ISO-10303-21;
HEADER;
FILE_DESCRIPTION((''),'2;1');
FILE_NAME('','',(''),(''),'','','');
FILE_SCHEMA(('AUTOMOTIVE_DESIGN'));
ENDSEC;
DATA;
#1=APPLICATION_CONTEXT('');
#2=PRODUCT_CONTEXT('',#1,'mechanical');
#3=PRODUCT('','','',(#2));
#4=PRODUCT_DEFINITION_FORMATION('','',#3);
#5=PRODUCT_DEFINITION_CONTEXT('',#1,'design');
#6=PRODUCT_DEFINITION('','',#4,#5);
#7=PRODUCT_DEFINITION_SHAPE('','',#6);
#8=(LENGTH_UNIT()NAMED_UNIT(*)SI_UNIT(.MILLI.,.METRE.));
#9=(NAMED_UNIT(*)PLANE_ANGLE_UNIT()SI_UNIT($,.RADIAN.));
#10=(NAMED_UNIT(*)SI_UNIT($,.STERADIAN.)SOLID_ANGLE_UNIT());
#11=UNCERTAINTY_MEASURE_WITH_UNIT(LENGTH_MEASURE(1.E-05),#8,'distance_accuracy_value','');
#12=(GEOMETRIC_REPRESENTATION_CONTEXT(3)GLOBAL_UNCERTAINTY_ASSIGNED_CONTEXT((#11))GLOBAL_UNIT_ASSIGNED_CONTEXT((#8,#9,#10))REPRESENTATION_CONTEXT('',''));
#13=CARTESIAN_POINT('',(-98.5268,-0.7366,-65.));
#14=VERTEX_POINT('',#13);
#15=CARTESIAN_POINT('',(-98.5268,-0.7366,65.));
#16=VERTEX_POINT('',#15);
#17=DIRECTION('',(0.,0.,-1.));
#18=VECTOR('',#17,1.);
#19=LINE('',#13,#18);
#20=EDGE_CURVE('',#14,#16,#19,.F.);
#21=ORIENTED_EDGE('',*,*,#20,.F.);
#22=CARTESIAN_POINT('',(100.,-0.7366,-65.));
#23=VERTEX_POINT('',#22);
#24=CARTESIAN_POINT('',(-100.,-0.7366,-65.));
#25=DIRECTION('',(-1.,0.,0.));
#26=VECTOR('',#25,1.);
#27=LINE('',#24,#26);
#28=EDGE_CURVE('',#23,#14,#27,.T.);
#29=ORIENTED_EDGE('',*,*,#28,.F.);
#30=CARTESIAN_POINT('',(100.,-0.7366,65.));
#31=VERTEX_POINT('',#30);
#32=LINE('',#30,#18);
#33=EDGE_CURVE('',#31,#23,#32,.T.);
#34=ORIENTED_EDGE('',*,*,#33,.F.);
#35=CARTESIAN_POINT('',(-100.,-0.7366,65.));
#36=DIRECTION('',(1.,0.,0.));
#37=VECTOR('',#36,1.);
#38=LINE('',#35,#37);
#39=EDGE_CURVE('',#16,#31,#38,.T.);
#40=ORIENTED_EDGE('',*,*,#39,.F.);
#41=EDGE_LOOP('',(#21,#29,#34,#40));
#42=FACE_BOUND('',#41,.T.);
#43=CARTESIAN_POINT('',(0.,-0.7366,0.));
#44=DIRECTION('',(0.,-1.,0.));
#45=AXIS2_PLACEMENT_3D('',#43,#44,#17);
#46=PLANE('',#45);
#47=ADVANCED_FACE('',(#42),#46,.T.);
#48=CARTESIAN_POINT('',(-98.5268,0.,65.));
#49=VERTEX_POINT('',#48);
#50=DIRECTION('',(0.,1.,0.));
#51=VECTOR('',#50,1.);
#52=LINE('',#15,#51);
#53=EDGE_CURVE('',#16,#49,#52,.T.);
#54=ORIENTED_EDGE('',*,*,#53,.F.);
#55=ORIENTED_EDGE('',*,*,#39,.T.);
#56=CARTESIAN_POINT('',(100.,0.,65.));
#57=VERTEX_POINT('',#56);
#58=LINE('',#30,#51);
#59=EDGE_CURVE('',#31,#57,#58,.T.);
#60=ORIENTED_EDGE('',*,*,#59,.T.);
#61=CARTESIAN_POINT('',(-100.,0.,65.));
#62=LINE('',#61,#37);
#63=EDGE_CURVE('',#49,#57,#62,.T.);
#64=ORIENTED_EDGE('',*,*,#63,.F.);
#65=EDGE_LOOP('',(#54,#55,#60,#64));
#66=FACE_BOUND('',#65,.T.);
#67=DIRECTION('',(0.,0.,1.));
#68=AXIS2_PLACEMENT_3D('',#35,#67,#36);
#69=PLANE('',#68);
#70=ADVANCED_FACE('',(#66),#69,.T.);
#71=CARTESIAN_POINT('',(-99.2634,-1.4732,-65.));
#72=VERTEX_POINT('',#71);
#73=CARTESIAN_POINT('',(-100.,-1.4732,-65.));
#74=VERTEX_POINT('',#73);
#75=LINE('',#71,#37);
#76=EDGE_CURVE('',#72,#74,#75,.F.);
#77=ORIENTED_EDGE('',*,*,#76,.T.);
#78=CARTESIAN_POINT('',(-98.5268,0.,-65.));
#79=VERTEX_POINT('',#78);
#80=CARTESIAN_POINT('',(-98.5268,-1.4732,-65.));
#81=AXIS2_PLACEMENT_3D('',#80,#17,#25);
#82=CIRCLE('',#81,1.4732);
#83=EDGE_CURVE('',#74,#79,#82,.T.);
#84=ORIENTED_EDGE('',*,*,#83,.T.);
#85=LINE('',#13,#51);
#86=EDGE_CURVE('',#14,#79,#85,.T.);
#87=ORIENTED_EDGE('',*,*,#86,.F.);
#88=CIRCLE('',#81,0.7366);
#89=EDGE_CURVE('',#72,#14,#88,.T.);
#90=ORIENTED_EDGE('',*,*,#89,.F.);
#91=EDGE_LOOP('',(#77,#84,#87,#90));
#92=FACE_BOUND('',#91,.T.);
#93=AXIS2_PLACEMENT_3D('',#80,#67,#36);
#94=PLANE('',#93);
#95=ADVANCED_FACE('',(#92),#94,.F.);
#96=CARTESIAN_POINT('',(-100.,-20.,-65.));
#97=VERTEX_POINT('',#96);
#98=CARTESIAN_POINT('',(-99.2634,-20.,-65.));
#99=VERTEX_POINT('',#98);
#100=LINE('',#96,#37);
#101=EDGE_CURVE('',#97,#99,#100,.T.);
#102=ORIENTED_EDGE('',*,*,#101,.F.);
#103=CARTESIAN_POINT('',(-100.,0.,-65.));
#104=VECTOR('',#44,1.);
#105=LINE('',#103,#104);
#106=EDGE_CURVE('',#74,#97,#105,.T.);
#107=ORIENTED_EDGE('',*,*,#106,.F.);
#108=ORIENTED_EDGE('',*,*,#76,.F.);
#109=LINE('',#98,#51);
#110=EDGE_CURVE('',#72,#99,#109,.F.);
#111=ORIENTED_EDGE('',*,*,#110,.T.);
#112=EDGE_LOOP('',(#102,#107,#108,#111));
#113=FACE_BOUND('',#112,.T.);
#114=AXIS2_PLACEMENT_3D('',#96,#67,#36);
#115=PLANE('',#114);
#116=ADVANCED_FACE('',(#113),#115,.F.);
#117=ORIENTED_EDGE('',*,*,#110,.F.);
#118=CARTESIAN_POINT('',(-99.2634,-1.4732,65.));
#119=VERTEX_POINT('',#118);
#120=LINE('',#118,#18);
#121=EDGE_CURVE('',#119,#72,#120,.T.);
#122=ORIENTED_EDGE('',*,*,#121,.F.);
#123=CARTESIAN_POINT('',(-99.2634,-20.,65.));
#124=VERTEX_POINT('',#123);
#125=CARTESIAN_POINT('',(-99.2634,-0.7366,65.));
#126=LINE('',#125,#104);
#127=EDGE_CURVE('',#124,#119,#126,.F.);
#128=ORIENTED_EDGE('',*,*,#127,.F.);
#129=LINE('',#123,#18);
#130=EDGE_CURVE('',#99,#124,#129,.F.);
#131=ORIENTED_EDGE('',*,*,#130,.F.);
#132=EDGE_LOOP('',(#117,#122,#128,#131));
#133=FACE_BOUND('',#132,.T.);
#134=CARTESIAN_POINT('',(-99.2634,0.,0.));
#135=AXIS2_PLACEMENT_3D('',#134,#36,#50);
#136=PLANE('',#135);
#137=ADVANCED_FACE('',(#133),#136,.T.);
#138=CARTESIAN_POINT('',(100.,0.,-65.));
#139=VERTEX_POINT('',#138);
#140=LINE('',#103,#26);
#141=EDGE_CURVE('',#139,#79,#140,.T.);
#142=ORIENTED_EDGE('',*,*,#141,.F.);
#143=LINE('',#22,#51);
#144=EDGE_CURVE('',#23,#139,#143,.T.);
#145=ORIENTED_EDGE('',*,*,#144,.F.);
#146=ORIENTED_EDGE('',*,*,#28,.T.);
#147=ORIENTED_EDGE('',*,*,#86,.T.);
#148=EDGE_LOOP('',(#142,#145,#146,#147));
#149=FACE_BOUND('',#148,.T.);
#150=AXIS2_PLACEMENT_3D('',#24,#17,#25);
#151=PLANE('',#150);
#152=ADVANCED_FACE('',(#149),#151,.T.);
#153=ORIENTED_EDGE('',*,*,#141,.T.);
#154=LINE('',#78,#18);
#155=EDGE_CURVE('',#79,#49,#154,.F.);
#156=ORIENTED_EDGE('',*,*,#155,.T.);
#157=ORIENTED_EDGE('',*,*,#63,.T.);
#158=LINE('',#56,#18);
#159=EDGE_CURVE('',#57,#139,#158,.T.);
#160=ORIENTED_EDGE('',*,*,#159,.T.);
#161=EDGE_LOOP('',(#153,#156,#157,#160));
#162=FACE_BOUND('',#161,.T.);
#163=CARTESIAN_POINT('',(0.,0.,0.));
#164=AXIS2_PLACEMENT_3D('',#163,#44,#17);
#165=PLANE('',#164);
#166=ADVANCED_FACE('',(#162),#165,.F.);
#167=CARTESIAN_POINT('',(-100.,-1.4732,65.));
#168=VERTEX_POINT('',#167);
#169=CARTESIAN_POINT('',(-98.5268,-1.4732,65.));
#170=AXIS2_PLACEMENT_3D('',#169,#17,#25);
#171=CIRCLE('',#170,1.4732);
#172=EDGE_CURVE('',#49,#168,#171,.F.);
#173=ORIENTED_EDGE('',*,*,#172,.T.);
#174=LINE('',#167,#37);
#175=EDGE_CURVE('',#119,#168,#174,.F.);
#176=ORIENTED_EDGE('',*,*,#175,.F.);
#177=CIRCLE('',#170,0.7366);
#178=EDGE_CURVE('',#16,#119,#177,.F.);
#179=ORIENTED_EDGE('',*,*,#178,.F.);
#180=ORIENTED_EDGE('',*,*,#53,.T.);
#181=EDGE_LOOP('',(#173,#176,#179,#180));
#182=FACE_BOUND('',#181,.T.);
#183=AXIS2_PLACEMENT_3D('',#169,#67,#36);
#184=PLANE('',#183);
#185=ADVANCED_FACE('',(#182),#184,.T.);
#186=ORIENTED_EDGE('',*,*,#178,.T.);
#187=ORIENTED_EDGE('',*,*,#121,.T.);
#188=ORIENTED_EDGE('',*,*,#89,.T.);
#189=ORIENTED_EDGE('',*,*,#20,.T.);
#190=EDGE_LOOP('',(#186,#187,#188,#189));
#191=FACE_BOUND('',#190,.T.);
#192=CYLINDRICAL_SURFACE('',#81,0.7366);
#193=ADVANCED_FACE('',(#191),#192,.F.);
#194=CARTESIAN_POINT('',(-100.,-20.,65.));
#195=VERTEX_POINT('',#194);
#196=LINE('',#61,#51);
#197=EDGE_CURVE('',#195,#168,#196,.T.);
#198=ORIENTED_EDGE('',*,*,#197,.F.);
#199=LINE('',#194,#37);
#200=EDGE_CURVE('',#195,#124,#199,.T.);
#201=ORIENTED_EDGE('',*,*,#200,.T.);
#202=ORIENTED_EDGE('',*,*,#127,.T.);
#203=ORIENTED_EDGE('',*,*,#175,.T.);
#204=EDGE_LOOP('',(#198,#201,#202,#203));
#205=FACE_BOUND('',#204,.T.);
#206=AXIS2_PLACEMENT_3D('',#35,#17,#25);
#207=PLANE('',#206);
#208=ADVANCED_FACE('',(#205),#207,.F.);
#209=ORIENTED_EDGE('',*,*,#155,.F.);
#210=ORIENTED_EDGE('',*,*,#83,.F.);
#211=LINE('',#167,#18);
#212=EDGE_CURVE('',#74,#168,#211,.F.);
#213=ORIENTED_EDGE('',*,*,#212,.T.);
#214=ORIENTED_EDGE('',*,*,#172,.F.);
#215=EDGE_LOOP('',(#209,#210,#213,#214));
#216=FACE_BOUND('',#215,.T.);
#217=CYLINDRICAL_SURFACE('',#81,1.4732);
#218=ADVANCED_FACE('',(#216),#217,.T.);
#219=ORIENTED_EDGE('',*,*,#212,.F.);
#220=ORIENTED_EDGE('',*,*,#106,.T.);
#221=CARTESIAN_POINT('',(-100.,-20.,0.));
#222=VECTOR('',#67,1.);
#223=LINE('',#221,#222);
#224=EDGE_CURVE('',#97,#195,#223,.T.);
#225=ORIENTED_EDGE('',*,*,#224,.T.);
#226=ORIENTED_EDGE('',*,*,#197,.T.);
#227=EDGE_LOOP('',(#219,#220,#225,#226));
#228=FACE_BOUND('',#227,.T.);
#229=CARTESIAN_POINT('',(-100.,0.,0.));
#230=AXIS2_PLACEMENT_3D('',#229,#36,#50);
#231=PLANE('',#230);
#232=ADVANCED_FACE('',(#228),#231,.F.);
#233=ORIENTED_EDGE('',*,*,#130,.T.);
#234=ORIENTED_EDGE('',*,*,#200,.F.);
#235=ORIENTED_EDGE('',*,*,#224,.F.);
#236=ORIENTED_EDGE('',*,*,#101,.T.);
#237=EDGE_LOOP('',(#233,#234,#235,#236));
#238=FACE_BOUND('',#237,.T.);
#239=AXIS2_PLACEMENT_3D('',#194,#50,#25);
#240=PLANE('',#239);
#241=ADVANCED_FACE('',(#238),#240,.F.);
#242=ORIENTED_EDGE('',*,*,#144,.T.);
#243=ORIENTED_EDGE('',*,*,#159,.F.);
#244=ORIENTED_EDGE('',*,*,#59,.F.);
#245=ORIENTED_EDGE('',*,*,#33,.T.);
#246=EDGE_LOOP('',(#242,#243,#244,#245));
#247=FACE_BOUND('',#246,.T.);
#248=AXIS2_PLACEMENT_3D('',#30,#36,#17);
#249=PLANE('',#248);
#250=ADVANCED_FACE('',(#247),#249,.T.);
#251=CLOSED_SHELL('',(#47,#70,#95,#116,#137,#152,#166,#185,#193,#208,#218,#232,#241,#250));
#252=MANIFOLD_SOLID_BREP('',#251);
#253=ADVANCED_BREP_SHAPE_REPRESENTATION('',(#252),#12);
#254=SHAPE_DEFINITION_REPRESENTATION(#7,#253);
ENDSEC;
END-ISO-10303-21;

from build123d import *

# Parameters (mm, degrees)
SKETCH1_W                    = 200
SKETCH1_H                    = 130
BASE_FLANGE1_DEPTH           = 0.7366
EDGE_FLANGE1_STRIP_W         = 4.4196
EDGE_FLANGE1_STRIP_H         = 0.7366
EDGE_FLANGE1_STRIP_CUT_DEPTH = 130
EDGE_FLANGE1_DEPTH           = 130


# Sheet-metal steps are written as plain solids
with BuildPart() as part:
    # Sketch1 → Base-Flange1 (new body)
    with BuildSketch(Plane(origin=(0, 0, 0), x_dir=(1, 0, 0), z_dir=(0, 1, 0))):
        Rectangle(SKETCH1_W, SKETCH1_H)
    extrude(amount=-BASE_FLANGE1_DEPTH)

    # Edge-Flange1 strip (across the edge) → Edge-Flange1 strip cut (cut)
    with BuildSketch(Plane(origin=(-100, -0.7366, 65), x_dir=(1, 0, 0), z_dir=(0, 0, -1))):
        with Locations((-0.7366, -0.3683)):
            Rectangle(EDGE_FLANGE1_STRIP_W, EDGE_FLANGE1_STRIP_H)
    extrude(amount=EDGE_FLANGE1_STRIP_CUT_DEPTH, mode=Mode.SUBTRACT)

    # Edge-Flange1 section (across the edge) → Edge-Flange1 (add)
    with BuildSketch(Plane(origin=(-100, -0.7366, 65), x_dir=(1, 0, 0), z_dir=(0, 0, -1))):
        with BuildLine():
            Line((0, 0.7366), (0, 19.2634))
            Line((0, 19.2634), (0.7366, 19.2634))
            Line((0.7366, 19.2634), (0.7366, 0.7366))
            ThreePointArc((0.7366, 0.7366), (0.952345145, 0.215745145), (1.4732, 0))
            Line((1.4732, 0), (1.4732, -0.7366))
            ThreePointArc((1.4732, -0.7366), (0.43149029, -0.30510971), (0, 0.7366))
        make_face()
    extrude(amount=EDGE_FLANGE1_DEPTH)


solid = part.part
